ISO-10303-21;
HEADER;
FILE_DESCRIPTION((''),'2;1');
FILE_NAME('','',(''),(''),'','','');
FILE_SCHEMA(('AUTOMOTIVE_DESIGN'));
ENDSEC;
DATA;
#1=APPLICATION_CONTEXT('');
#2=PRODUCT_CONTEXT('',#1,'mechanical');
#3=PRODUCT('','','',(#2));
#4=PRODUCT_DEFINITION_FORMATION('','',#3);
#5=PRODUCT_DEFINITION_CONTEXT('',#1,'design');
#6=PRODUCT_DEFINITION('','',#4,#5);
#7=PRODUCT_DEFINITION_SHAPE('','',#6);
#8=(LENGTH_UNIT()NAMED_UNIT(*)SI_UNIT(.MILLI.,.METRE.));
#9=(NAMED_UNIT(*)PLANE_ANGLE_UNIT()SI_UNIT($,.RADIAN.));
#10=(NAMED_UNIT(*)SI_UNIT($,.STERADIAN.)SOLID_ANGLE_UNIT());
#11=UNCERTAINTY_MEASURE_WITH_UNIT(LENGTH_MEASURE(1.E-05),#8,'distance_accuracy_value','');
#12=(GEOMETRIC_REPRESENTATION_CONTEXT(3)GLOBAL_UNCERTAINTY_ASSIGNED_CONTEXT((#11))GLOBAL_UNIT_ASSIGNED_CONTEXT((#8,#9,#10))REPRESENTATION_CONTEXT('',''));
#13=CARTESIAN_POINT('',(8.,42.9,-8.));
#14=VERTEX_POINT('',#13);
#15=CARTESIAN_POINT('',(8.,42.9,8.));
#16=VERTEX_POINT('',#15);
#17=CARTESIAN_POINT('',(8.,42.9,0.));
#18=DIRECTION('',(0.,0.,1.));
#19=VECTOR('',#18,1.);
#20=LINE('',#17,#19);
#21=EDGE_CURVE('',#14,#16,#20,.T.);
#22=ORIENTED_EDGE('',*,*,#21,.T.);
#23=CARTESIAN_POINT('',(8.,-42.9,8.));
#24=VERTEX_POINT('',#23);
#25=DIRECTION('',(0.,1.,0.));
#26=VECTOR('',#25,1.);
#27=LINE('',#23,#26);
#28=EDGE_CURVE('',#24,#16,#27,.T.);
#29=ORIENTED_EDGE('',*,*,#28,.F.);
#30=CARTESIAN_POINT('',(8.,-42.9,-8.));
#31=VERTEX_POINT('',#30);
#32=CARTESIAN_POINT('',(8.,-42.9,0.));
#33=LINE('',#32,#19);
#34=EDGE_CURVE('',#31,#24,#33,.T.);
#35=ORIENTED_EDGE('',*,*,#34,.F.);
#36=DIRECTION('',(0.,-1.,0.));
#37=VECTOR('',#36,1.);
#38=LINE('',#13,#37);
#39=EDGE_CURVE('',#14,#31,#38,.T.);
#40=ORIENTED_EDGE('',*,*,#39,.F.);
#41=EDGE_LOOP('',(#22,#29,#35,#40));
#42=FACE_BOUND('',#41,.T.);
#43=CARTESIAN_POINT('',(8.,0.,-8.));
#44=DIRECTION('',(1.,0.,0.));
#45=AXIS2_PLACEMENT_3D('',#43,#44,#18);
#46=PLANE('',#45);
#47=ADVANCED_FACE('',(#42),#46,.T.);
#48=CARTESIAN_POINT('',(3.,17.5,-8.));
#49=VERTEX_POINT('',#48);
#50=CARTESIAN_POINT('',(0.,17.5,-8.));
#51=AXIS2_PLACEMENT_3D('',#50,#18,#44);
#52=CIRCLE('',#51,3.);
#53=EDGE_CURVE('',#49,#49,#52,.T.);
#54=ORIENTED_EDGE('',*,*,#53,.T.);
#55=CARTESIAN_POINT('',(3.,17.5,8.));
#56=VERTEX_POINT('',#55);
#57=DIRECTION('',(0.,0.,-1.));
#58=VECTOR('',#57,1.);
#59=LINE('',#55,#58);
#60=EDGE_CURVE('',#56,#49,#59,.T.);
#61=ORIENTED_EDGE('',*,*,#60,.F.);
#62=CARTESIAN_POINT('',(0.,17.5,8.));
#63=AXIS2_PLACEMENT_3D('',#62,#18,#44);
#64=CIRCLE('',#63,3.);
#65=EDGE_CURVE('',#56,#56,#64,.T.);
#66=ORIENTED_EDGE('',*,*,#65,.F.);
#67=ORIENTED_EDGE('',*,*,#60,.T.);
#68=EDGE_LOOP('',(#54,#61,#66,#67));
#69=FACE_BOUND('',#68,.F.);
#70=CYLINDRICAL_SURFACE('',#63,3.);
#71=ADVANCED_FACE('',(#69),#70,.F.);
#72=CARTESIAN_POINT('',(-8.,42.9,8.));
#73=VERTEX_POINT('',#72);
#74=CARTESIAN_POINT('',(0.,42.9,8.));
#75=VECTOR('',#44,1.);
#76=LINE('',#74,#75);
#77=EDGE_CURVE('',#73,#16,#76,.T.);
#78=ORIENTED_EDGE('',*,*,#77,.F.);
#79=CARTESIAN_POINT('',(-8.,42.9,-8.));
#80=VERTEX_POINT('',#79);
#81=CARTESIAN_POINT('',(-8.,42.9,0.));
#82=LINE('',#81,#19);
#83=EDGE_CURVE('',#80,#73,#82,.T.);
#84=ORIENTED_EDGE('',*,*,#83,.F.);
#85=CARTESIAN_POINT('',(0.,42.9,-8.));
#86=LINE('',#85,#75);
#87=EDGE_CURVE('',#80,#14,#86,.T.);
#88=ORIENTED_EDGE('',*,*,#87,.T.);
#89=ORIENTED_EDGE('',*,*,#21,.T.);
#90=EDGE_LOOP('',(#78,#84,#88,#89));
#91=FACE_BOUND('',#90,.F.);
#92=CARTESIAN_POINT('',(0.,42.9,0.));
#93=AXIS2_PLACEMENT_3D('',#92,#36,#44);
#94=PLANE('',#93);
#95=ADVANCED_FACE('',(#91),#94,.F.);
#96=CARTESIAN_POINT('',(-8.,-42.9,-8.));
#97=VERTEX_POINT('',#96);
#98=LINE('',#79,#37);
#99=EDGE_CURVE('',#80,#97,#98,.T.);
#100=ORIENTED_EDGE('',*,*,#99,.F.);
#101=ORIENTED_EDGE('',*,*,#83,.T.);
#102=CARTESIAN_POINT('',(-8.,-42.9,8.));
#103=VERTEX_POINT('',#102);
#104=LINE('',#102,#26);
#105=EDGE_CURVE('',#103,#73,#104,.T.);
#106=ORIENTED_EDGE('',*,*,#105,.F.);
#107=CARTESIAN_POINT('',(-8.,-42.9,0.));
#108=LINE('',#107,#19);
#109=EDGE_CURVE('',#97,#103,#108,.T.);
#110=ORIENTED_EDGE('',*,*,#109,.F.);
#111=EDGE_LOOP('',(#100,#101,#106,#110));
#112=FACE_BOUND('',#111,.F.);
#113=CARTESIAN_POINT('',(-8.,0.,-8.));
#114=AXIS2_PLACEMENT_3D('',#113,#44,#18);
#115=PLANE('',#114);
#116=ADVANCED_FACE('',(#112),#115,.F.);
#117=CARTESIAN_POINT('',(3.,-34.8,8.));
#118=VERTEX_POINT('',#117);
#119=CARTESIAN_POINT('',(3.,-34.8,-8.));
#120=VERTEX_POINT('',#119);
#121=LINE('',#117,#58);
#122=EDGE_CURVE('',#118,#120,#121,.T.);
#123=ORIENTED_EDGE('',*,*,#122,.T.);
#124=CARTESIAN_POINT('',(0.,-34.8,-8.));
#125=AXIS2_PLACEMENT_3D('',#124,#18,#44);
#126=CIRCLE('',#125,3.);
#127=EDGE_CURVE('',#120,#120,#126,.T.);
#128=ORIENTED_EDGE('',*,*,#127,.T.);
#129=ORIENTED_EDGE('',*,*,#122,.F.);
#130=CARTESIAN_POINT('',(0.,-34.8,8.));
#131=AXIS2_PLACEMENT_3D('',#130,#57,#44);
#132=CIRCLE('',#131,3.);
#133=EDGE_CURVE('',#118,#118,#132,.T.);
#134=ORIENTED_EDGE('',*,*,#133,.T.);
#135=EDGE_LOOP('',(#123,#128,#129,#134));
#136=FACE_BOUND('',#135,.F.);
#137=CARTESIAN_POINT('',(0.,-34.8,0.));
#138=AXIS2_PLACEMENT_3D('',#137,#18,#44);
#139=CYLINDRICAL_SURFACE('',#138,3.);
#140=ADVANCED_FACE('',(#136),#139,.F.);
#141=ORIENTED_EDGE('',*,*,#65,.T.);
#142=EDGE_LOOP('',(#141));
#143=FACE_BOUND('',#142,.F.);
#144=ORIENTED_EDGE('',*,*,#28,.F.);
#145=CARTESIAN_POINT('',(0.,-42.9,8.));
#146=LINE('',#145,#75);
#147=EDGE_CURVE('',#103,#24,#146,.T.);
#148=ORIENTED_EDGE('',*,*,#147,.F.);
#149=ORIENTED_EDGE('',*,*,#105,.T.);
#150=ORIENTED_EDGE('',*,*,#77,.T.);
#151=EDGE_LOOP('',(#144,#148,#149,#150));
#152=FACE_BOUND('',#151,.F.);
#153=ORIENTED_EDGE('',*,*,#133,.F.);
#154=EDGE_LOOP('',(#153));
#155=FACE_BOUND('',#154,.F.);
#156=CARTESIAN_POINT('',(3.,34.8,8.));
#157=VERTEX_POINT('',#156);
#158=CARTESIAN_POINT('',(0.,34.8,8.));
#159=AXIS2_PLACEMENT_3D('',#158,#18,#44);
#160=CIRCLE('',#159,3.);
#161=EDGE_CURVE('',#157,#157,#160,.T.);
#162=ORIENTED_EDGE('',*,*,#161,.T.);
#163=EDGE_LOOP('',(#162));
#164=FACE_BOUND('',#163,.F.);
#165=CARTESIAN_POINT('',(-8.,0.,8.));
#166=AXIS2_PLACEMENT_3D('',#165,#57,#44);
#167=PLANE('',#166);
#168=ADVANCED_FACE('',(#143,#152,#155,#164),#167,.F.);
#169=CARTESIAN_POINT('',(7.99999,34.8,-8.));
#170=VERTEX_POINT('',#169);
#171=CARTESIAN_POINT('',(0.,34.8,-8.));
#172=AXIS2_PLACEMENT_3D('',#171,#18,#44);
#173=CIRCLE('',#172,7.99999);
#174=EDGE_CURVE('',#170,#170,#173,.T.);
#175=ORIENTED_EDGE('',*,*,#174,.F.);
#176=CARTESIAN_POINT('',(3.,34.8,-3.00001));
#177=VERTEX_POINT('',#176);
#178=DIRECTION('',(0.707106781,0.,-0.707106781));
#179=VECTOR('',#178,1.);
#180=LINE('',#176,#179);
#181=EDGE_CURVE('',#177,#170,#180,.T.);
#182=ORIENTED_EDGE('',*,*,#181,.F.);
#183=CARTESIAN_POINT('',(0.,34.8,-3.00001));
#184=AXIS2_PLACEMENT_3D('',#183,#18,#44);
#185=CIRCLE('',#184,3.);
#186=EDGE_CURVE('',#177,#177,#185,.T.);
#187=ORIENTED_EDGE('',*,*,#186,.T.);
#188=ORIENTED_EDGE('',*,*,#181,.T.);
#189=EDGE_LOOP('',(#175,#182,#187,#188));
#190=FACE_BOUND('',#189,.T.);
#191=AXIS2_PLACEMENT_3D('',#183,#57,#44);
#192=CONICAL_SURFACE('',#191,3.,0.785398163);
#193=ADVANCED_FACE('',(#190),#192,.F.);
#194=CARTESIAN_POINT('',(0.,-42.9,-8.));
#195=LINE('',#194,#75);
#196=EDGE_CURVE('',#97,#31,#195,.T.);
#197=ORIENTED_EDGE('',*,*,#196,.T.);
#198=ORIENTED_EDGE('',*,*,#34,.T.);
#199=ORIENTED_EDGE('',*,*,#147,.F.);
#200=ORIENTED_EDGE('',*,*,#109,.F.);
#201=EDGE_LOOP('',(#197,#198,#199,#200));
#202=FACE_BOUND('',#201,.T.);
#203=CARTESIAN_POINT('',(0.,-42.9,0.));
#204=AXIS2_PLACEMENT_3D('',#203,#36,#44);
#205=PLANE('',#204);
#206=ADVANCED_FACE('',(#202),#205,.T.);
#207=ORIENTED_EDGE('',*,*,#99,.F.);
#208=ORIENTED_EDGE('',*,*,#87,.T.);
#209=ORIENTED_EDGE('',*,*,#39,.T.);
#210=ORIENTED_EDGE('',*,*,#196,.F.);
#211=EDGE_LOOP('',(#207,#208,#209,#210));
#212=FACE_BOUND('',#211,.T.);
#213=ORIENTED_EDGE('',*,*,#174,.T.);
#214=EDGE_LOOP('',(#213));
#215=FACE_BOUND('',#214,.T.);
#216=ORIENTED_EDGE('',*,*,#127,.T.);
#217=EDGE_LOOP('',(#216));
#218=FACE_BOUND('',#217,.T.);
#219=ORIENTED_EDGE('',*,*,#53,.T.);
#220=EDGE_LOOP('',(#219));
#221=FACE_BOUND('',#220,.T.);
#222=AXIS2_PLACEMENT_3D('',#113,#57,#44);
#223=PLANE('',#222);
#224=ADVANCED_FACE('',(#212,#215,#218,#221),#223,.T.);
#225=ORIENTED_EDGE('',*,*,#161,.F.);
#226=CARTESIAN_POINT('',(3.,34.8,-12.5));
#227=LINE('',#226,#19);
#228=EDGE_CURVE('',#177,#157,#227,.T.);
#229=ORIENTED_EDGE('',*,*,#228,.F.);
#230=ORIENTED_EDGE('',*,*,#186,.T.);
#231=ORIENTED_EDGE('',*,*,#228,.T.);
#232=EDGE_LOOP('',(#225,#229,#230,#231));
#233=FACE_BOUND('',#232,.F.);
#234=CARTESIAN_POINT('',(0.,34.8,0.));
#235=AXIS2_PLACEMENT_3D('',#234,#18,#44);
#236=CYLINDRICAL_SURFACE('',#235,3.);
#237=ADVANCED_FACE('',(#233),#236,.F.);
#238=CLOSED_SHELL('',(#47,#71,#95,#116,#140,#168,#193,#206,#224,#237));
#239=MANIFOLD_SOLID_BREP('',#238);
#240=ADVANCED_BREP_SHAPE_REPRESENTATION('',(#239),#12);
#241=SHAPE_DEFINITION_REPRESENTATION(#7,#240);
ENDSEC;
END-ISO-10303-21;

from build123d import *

# Parameters (mm, degrees)
F5_W     = 16
F5_H     = 16
F6_DEPTH = 42.9
F0_R     = 3
F7_DEPTH = 12.5
F2_SIZE  = 4.99999
F3_R     = 3
F4_DEPTH = 16.001


# Not quite as in the source:
# - a fillet or chamfer is up to 0.001 mm smaller than in the source, because OpenCascade refuses the exact size


with BuildPart() as f6:
    # F5 (on Front) → F6 (new body, symmetric)
    with BuildSketch(Plane.XZ):
        Rectangle(F5_W, F5_H)
    extrude(amount=F6_DEPTH, both=True)

    # F0 (on Top) → F7 (cut, symmetric)
    with BuildSketch(Plane.XY):
        with Locations((0, -34.8)):
            Circle(F0_R)
        with Locations((0, 34.8)):
            Circle(F0_R)
    extrude(amount=F7_DEPTH, both=True, mode=Mode.SUBTRACT)

    # F2 (size 5 in the source; OpenCascade refuses exactly that, so slightly less here)
    f2_edges = [f6.edges().sort_by_distance(p)[0] for p in [
        (-3, 34.8, -8),
    ]]
    chamfer(f2_edges, length=F2_SIZE)

    # F3 (on face) → F4 (cut, through all)
    with BuildSketch(Plane.XY.offset(8)):
        with Locations((0, 17.5)):
            Circle(F3_R)
    extrude(amount=-F4_DEPTH, mode=Mode.SUBTRACT)


solid = f6.part
